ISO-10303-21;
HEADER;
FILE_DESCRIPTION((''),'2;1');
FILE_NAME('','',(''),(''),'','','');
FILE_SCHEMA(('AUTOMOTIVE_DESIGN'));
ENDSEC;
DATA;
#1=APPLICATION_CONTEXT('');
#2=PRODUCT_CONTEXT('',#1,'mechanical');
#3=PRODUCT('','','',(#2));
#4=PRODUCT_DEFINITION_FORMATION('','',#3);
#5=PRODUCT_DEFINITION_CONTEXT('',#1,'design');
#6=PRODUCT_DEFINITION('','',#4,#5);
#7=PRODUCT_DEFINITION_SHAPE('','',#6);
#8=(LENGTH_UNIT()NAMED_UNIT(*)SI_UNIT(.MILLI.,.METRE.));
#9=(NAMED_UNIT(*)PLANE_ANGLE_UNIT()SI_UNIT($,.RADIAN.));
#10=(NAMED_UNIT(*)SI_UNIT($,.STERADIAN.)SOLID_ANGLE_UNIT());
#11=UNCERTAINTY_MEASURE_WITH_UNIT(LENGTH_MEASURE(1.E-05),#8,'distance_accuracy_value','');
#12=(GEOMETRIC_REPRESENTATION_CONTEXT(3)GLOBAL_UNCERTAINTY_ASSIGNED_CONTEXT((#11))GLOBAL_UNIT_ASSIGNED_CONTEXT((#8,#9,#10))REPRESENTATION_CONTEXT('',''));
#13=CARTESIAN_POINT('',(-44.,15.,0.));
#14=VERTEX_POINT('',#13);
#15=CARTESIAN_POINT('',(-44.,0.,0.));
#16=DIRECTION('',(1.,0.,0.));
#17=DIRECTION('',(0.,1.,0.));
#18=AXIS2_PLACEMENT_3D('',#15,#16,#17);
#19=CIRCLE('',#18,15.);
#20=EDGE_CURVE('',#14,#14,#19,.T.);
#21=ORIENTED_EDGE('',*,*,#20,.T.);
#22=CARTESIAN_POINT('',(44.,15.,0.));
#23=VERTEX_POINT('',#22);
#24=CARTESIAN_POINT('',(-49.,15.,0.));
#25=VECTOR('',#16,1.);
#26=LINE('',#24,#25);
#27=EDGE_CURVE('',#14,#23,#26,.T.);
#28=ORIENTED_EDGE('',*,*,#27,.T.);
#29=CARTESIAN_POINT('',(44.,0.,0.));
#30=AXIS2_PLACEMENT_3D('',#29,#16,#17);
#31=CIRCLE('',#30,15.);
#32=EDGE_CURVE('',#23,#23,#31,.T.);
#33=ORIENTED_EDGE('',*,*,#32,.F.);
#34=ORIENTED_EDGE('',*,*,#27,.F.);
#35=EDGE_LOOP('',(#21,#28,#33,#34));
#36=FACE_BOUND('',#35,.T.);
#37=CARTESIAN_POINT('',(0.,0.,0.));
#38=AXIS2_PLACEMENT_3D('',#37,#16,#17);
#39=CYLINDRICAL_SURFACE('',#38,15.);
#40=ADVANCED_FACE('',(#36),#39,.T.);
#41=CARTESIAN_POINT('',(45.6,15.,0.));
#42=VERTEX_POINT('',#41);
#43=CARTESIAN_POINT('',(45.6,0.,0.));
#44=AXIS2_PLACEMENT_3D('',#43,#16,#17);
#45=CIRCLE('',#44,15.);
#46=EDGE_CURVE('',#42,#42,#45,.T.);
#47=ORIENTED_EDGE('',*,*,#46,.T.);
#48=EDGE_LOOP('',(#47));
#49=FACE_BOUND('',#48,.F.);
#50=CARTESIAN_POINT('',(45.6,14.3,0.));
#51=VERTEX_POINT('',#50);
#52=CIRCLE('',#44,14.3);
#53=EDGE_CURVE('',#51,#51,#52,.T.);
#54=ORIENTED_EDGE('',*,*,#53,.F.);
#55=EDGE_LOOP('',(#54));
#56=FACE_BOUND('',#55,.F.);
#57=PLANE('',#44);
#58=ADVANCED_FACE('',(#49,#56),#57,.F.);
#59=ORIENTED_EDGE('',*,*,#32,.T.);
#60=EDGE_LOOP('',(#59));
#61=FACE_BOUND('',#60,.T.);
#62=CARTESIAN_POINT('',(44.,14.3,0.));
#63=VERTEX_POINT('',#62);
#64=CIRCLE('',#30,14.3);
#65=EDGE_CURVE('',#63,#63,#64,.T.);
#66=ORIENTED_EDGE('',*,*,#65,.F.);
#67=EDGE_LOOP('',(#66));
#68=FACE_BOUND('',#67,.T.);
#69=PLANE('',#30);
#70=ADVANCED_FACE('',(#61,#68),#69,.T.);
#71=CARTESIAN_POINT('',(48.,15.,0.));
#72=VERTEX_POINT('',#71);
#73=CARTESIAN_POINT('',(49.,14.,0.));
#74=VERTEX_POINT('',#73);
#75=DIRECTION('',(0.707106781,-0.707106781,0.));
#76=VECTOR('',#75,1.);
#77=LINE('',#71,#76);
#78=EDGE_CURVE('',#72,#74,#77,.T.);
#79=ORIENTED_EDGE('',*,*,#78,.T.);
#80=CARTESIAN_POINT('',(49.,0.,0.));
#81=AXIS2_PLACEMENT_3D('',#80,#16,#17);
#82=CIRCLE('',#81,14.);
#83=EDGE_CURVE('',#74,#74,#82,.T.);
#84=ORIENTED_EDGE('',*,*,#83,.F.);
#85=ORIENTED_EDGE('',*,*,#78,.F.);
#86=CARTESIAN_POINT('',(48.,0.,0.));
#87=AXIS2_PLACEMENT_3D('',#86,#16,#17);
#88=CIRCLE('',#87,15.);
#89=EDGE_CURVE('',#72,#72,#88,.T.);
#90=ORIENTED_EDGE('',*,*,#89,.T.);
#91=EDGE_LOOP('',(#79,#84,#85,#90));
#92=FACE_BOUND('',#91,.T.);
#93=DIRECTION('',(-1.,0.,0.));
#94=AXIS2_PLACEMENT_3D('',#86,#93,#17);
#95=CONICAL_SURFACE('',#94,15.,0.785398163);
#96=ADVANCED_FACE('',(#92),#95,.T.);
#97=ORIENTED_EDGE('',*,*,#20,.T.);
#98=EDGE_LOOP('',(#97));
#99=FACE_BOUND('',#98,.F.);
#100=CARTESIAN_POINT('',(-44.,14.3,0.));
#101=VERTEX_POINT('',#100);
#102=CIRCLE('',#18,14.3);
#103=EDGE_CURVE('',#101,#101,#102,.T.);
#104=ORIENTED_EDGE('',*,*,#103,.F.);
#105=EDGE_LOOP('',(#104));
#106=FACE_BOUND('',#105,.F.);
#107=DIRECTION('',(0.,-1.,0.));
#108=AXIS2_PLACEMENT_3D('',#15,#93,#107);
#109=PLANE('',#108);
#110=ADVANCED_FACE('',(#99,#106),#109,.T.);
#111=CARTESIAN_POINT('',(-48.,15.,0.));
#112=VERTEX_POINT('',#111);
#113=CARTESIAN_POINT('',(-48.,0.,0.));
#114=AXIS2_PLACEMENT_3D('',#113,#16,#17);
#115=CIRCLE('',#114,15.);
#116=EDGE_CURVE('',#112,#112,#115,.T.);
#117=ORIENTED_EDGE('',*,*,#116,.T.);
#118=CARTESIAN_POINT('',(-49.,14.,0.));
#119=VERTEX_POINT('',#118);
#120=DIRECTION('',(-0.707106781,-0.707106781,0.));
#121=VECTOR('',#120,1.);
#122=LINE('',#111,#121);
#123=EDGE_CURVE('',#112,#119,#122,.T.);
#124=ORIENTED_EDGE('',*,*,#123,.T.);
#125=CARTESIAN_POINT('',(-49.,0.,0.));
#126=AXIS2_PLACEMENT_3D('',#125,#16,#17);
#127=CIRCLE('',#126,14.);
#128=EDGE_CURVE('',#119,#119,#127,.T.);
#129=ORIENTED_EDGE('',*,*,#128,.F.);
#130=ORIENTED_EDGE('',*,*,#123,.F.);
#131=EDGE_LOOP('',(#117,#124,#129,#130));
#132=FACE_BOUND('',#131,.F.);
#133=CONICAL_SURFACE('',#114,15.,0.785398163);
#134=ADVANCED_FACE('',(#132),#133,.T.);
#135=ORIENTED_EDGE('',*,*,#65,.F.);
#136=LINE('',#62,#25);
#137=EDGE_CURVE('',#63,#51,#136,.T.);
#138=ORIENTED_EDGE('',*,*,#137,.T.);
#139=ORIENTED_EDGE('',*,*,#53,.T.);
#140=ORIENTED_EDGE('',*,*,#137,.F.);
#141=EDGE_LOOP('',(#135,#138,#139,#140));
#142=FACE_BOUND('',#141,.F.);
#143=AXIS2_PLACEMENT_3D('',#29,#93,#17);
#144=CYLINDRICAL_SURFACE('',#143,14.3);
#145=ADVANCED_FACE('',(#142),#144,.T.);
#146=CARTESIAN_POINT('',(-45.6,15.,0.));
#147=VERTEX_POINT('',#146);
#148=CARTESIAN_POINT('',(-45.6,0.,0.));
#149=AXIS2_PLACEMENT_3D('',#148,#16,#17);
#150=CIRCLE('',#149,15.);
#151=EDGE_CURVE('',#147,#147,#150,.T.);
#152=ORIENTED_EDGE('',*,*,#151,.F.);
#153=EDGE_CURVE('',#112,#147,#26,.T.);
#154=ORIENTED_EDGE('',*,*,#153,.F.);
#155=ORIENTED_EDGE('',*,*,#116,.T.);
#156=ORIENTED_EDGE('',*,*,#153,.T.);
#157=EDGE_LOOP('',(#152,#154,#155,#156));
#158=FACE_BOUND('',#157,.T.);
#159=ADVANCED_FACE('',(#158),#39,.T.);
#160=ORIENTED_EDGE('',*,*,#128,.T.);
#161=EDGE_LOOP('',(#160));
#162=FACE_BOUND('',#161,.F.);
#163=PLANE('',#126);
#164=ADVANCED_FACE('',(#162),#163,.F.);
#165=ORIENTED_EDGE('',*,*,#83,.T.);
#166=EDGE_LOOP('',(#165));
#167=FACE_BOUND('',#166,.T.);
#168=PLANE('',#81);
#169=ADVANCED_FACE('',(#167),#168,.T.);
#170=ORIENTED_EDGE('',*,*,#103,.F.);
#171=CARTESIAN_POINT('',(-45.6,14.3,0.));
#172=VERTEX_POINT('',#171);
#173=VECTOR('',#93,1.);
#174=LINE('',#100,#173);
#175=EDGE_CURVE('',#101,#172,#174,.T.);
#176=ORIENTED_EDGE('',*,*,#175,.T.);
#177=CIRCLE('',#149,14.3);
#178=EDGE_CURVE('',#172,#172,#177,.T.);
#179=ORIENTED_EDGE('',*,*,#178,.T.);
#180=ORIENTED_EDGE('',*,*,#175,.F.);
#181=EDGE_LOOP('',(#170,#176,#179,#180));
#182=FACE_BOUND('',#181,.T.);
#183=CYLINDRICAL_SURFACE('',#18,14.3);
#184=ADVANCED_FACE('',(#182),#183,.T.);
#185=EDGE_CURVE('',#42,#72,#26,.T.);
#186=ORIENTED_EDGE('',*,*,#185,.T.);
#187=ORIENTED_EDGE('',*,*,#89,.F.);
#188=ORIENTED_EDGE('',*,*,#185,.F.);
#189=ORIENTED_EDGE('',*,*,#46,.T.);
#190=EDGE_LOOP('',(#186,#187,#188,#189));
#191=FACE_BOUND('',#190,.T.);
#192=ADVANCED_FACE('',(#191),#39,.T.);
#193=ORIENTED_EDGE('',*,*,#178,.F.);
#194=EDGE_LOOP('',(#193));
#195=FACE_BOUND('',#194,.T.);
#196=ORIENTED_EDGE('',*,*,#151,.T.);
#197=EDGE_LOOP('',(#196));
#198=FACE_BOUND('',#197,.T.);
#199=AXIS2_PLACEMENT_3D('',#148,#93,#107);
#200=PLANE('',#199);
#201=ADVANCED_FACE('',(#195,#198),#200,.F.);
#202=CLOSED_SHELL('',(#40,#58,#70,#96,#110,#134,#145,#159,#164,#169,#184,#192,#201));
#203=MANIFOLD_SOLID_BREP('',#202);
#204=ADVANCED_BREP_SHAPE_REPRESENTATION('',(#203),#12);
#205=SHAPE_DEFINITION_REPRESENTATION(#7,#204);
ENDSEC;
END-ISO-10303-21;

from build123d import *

# Parameters (mm, degrees)
F0_R     = 15
F1_DEPTH = 49
F3_R     = 17.9592935662
F3_R_2   = 14.3
F4_DEPTH = 1.6
F5_SIZE  = 1


# Not quite as in the source:
# - a pattern or mirror of a feature is missing from the dataset's text; its kind, count and spacing are read off the source's solid


with BuildPart() as f1:
    # F0 (on Right) → F1 (new body, symmetric)
    with BuildSketch(Plane.YZ):
        Circle(F0_R)
    extrude(amount=F1_DEPTH, both=True)

    # F3 (on offset) → F4 (cut)
    with BuildSketch(Plane.YZ.offset(44)):
        Circle(F3_R)
        Circle(F3_R_2, mode=Mode.SUBTRACT)
    f4 = extrude(amount=F4_DEPTH, mode=Mode.SUBTRACT)

    # F4_copies: F4 across plane
    add(f4.mirror(Plane(origin=(0, 0, 0), x_dir=(0, 0, -1), z_dir=(-1, 0, 0))), mode=Mode.SUBTRACT)

    # F5
    f5_edges = [f1.edges().sort_by_distance(p)[0] for p in [
        (-49, -15, 0),
        (49, -15, 0),
    ]]
    chamfer(f5_edges, length=F5_SIZE)


solid = f1.part
